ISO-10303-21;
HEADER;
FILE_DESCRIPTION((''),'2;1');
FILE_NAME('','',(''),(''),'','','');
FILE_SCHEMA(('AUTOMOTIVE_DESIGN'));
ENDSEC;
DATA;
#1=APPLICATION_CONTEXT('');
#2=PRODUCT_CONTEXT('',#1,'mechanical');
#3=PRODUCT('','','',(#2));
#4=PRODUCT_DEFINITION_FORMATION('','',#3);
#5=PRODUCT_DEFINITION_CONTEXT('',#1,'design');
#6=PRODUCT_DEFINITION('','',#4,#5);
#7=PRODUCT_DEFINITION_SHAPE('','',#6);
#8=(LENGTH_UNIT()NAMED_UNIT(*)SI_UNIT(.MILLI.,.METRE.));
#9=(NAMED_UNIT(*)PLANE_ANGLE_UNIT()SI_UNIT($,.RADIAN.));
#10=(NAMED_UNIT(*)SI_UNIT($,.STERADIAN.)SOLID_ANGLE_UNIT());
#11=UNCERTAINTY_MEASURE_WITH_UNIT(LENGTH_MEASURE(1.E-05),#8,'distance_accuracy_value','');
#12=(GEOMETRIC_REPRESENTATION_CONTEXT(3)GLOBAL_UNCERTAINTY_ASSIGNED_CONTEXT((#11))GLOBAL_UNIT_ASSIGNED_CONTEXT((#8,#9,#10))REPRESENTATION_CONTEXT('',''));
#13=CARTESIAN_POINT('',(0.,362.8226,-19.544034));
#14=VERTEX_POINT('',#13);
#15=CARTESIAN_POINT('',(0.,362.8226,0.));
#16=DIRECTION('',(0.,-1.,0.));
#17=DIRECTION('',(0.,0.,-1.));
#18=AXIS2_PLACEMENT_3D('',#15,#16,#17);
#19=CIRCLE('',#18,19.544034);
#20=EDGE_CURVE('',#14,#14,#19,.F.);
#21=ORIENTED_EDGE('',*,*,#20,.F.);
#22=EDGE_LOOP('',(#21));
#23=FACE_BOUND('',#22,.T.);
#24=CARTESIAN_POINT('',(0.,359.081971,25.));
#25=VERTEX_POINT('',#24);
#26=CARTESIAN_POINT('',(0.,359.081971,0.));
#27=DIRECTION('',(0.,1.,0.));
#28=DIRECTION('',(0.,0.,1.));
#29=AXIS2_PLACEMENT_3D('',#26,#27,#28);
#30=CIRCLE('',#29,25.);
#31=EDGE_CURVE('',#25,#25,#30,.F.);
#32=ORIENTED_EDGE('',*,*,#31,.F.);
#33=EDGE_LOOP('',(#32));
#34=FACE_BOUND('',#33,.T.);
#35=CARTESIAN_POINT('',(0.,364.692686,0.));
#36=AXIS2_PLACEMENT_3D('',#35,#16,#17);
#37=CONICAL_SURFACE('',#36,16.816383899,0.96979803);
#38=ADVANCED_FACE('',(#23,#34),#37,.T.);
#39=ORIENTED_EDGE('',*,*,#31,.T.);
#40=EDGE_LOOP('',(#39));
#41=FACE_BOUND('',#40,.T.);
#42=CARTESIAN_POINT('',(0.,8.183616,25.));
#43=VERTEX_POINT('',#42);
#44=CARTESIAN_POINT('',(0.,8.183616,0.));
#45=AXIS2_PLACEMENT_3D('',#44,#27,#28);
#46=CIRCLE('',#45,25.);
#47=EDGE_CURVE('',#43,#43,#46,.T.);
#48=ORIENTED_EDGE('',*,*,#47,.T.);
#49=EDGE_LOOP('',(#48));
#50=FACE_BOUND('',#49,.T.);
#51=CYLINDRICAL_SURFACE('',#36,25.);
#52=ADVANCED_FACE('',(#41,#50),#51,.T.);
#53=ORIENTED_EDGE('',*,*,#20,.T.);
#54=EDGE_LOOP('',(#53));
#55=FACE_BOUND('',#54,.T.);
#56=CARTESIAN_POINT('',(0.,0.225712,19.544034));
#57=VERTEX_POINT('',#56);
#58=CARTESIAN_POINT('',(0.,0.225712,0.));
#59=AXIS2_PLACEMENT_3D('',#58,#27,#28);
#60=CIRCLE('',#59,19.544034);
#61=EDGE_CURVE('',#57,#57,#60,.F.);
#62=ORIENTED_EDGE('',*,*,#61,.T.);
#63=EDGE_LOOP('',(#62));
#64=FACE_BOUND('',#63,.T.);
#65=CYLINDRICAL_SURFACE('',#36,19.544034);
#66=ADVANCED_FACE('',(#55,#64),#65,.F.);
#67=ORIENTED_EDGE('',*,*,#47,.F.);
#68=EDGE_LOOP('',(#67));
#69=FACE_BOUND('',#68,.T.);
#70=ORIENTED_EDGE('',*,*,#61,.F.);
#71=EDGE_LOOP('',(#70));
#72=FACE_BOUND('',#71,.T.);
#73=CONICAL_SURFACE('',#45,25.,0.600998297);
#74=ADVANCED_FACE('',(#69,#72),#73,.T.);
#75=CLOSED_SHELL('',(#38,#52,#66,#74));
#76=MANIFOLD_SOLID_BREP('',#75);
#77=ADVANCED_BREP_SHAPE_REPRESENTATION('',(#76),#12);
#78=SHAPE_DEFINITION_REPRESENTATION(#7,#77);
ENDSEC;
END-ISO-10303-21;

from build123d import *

# Parameters (mm, degrees)
SKETCH1_R           = 25
BOSS_EXTRUDE1_DEPTH = 364.692686
SKETCH2_R           = 19.544034105
CUT_EXTRUDE1_DEPTH  = 367.402449803


with BuildPart() as part:
    # Sketch1 → Boss-Extrude1 (new body)
    with BuildSketch(Plane(origin=(0, 0, 0), x_dir=(1, 0, 0), z_dir=(0, 1, 0))):
        with Locations(Location((0, 0, 0), (0, 0, 270))):
            Circle(SKETCH1_R)
    extrude(amount=BOSS_EXTRUDE1_DEPTH)

    # Sketch2 → Cut-Extrude1 (cut, through all)
    with BuildSketch(Plane(origin=(0, 0, 0), x_dir=(1, 0, 0), z_dir=(0, 1, 0))):
        with Locations(Location((0, 0, 0), (0, 0, 270))):
            Circle(SKETCH2_R)
    extrude(amount=CUT_EXTRUDE1_DEPTH, mode=Mode.SUBTRACT)

    # Chamfer1: read off the stored shape, not the designer's step
    # Chamfer1 outline → Chamfer1 (revolve, cut)
    with BuildSketch(Plane.XY):
        Polygon((25, 359.08197147), (25, 364.692686108), (19.544034105, 364.692686108), (19.544034105, 362.822599982), align=None)
        Polygon((25, 8.183616101), (19.544034105, 0.225711764), (19.544034105, 0), (25, 0), align=None)
    revolve(axis=Axis((0, 0, 0), (0, 1, 0)), mode=Mode.SUBTRACT)


solid = part.part
